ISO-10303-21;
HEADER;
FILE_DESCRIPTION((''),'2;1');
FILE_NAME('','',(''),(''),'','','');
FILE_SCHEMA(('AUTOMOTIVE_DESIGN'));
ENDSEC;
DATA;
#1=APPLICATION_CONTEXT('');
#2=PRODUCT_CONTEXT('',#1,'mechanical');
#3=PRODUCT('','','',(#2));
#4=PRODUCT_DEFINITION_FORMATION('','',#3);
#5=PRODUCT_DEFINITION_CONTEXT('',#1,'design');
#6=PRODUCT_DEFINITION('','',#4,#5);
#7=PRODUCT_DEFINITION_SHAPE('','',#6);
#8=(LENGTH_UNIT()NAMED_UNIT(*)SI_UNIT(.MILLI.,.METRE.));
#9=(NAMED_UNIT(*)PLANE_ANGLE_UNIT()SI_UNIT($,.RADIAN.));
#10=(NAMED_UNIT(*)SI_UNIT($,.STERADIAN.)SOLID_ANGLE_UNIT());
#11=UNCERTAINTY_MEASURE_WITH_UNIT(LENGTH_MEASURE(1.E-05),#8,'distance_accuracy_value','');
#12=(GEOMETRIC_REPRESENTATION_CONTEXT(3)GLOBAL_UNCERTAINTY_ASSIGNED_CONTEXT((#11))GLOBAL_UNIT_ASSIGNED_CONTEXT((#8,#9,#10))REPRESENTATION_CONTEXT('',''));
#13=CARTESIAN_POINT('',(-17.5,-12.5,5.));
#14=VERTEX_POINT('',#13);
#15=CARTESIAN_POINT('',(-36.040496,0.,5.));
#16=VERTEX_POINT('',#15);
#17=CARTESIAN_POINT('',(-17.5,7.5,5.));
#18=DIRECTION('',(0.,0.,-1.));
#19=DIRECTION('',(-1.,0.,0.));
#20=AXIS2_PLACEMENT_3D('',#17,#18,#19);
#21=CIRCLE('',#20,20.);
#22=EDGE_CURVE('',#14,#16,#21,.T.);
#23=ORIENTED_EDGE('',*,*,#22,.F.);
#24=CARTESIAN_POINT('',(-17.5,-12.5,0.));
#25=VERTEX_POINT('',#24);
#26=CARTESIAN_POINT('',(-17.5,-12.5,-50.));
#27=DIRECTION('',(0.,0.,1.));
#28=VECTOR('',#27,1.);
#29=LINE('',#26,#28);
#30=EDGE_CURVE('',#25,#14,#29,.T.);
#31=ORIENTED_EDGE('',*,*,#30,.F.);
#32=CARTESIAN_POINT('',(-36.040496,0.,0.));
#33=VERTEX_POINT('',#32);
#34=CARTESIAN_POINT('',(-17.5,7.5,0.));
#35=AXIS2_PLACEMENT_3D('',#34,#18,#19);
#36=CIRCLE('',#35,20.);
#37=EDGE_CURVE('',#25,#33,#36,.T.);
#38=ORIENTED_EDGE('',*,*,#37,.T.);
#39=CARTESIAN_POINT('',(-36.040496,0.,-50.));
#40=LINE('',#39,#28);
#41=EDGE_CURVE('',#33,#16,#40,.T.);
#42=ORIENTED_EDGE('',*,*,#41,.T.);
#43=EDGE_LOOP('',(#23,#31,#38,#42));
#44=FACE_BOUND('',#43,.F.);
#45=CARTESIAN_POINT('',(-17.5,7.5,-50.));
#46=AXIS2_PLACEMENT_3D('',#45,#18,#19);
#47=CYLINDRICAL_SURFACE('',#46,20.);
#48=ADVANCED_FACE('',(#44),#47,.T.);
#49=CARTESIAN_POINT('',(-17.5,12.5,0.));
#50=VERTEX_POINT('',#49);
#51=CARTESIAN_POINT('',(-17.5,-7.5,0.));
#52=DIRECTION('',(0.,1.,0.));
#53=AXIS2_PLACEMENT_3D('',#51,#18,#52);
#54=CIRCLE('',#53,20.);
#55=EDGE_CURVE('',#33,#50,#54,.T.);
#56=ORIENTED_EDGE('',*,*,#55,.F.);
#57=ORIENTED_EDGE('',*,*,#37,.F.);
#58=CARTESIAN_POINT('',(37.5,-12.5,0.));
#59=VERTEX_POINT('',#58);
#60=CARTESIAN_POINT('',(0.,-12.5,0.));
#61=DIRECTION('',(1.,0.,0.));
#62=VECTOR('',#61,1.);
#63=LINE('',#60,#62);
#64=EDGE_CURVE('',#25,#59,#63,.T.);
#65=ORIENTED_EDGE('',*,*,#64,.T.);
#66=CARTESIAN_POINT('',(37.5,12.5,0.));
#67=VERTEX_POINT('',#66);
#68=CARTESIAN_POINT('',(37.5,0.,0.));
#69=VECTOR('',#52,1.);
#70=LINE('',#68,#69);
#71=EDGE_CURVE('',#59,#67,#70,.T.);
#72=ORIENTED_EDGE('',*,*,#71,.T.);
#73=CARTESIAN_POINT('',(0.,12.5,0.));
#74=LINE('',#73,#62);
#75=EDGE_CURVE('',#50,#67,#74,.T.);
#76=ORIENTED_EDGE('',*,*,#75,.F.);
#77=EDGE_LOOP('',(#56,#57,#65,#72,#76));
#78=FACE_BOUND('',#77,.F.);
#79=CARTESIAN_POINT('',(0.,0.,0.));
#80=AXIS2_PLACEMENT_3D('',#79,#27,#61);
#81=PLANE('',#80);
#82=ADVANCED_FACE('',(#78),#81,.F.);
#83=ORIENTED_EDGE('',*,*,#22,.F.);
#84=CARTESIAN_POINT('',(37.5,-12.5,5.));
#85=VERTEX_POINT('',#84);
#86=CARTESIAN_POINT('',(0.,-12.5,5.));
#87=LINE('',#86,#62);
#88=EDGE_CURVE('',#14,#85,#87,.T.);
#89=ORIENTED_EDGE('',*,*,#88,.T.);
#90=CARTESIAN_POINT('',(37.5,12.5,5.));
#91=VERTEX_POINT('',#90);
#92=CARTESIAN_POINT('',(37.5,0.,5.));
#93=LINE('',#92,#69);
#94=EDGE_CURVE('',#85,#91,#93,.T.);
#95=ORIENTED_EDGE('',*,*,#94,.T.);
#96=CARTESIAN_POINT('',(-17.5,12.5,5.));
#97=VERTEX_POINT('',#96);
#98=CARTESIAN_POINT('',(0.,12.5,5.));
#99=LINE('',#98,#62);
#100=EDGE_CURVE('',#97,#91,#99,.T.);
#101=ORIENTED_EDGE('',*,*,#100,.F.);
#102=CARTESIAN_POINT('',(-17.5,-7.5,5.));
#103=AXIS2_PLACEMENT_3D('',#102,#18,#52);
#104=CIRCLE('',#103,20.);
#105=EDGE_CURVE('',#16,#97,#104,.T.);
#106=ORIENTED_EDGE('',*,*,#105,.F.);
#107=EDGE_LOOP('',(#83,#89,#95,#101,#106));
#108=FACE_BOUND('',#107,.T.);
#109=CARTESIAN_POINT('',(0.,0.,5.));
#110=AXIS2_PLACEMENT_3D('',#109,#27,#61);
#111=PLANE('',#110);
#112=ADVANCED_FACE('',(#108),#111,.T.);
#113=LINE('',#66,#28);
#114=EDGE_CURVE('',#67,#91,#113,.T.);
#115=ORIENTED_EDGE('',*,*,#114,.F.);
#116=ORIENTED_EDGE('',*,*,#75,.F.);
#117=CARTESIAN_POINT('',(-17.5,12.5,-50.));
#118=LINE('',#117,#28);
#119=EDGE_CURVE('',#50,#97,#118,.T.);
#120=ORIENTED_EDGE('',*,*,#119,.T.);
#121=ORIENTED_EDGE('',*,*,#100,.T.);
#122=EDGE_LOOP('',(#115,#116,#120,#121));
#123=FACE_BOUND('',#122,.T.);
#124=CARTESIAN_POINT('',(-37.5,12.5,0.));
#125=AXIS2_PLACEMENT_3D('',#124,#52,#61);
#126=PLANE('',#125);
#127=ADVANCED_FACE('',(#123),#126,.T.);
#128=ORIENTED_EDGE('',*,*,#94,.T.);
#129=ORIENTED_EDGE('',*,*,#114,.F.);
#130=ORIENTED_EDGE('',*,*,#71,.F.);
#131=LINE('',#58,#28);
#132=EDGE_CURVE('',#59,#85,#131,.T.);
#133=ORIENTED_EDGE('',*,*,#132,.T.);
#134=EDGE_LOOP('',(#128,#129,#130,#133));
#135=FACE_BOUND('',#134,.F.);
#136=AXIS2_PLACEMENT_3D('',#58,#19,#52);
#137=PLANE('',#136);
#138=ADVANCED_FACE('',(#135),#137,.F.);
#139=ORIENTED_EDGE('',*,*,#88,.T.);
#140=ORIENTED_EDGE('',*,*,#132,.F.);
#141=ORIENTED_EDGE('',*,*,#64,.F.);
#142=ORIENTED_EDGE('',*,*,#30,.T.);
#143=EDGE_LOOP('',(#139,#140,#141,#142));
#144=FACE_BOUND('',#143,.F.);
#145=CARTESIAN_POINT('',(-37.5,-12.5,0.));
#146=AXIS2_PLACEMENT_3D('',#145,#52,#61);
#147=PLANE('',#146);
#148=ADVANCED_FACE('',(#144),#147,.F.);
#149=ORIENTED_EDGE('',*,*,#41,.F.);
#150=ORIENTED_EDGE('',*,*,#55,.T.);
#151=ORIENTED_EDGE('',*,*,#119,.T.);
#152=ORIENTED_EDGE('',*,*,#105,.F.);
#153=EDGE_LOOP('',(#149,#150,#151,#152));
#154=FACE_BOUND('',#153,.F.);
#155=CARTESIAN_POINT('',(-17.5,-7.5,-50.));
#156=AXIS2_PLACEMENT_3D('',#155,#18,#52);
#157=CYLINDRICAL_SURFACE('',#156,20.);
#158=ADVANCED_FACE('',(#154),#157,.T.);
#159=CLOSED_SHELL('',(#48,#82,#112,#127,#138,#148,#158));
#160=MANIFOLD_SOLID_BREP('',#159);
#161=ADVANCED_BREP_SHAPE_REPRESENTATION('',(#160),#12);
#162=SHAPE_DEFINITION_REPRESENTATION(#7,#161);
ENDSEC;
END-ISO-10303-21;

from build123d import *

# Parameters (mm, degrees)
F0_W        = 75
F0_H        = 25
F1_DEPTH    = 5
F2_T1_DEPTH = 105


# Not quite as in the source:
# - a fillet or chamfer that OpenCascade refuses, or shapes differently, is made with other operations: its cross-section is extruded or revolved along the edge and cut away or added


with BuildPart() as f1:
    # F0 (on Top) → F1 (new body)
    with BuildSketch(Plane.XY):
        Rectangle(F0_W, F0_H)
    extrude(amount=F1_DEPTH)

    # F2: fillet of radius 20 on 2 edges, made by hand

    # F2_s2 → F2_t1 (cut)
    with BuildSketch(Plane.XY.offset(-50)):
        with BuildLine():
            ThreePointArc((-17.5, 12.5), (-31.6421356237, 6.6421356237), (-37.5, -7.5))
            Line((-37.5, -7.5), (-37.5, 12.5))
            Line((-37.5, 12.5), (-17.5, 12.5))
        make_face()
        with BuildLine():
            ThreePointArc((-37.5, 7.5), (-31.6421356237, -6.6421356237), (-17.5, -12.5))
            Line((-17.5, -12.5), (-37.5, -12.5))
            Line((-37.5, -12.5), (-37.5, 7.5))
        make_face()
    extrude(amount=F2_T1_DEPTH, mode=Mode.SUBTRACT)


solid = f1.part
